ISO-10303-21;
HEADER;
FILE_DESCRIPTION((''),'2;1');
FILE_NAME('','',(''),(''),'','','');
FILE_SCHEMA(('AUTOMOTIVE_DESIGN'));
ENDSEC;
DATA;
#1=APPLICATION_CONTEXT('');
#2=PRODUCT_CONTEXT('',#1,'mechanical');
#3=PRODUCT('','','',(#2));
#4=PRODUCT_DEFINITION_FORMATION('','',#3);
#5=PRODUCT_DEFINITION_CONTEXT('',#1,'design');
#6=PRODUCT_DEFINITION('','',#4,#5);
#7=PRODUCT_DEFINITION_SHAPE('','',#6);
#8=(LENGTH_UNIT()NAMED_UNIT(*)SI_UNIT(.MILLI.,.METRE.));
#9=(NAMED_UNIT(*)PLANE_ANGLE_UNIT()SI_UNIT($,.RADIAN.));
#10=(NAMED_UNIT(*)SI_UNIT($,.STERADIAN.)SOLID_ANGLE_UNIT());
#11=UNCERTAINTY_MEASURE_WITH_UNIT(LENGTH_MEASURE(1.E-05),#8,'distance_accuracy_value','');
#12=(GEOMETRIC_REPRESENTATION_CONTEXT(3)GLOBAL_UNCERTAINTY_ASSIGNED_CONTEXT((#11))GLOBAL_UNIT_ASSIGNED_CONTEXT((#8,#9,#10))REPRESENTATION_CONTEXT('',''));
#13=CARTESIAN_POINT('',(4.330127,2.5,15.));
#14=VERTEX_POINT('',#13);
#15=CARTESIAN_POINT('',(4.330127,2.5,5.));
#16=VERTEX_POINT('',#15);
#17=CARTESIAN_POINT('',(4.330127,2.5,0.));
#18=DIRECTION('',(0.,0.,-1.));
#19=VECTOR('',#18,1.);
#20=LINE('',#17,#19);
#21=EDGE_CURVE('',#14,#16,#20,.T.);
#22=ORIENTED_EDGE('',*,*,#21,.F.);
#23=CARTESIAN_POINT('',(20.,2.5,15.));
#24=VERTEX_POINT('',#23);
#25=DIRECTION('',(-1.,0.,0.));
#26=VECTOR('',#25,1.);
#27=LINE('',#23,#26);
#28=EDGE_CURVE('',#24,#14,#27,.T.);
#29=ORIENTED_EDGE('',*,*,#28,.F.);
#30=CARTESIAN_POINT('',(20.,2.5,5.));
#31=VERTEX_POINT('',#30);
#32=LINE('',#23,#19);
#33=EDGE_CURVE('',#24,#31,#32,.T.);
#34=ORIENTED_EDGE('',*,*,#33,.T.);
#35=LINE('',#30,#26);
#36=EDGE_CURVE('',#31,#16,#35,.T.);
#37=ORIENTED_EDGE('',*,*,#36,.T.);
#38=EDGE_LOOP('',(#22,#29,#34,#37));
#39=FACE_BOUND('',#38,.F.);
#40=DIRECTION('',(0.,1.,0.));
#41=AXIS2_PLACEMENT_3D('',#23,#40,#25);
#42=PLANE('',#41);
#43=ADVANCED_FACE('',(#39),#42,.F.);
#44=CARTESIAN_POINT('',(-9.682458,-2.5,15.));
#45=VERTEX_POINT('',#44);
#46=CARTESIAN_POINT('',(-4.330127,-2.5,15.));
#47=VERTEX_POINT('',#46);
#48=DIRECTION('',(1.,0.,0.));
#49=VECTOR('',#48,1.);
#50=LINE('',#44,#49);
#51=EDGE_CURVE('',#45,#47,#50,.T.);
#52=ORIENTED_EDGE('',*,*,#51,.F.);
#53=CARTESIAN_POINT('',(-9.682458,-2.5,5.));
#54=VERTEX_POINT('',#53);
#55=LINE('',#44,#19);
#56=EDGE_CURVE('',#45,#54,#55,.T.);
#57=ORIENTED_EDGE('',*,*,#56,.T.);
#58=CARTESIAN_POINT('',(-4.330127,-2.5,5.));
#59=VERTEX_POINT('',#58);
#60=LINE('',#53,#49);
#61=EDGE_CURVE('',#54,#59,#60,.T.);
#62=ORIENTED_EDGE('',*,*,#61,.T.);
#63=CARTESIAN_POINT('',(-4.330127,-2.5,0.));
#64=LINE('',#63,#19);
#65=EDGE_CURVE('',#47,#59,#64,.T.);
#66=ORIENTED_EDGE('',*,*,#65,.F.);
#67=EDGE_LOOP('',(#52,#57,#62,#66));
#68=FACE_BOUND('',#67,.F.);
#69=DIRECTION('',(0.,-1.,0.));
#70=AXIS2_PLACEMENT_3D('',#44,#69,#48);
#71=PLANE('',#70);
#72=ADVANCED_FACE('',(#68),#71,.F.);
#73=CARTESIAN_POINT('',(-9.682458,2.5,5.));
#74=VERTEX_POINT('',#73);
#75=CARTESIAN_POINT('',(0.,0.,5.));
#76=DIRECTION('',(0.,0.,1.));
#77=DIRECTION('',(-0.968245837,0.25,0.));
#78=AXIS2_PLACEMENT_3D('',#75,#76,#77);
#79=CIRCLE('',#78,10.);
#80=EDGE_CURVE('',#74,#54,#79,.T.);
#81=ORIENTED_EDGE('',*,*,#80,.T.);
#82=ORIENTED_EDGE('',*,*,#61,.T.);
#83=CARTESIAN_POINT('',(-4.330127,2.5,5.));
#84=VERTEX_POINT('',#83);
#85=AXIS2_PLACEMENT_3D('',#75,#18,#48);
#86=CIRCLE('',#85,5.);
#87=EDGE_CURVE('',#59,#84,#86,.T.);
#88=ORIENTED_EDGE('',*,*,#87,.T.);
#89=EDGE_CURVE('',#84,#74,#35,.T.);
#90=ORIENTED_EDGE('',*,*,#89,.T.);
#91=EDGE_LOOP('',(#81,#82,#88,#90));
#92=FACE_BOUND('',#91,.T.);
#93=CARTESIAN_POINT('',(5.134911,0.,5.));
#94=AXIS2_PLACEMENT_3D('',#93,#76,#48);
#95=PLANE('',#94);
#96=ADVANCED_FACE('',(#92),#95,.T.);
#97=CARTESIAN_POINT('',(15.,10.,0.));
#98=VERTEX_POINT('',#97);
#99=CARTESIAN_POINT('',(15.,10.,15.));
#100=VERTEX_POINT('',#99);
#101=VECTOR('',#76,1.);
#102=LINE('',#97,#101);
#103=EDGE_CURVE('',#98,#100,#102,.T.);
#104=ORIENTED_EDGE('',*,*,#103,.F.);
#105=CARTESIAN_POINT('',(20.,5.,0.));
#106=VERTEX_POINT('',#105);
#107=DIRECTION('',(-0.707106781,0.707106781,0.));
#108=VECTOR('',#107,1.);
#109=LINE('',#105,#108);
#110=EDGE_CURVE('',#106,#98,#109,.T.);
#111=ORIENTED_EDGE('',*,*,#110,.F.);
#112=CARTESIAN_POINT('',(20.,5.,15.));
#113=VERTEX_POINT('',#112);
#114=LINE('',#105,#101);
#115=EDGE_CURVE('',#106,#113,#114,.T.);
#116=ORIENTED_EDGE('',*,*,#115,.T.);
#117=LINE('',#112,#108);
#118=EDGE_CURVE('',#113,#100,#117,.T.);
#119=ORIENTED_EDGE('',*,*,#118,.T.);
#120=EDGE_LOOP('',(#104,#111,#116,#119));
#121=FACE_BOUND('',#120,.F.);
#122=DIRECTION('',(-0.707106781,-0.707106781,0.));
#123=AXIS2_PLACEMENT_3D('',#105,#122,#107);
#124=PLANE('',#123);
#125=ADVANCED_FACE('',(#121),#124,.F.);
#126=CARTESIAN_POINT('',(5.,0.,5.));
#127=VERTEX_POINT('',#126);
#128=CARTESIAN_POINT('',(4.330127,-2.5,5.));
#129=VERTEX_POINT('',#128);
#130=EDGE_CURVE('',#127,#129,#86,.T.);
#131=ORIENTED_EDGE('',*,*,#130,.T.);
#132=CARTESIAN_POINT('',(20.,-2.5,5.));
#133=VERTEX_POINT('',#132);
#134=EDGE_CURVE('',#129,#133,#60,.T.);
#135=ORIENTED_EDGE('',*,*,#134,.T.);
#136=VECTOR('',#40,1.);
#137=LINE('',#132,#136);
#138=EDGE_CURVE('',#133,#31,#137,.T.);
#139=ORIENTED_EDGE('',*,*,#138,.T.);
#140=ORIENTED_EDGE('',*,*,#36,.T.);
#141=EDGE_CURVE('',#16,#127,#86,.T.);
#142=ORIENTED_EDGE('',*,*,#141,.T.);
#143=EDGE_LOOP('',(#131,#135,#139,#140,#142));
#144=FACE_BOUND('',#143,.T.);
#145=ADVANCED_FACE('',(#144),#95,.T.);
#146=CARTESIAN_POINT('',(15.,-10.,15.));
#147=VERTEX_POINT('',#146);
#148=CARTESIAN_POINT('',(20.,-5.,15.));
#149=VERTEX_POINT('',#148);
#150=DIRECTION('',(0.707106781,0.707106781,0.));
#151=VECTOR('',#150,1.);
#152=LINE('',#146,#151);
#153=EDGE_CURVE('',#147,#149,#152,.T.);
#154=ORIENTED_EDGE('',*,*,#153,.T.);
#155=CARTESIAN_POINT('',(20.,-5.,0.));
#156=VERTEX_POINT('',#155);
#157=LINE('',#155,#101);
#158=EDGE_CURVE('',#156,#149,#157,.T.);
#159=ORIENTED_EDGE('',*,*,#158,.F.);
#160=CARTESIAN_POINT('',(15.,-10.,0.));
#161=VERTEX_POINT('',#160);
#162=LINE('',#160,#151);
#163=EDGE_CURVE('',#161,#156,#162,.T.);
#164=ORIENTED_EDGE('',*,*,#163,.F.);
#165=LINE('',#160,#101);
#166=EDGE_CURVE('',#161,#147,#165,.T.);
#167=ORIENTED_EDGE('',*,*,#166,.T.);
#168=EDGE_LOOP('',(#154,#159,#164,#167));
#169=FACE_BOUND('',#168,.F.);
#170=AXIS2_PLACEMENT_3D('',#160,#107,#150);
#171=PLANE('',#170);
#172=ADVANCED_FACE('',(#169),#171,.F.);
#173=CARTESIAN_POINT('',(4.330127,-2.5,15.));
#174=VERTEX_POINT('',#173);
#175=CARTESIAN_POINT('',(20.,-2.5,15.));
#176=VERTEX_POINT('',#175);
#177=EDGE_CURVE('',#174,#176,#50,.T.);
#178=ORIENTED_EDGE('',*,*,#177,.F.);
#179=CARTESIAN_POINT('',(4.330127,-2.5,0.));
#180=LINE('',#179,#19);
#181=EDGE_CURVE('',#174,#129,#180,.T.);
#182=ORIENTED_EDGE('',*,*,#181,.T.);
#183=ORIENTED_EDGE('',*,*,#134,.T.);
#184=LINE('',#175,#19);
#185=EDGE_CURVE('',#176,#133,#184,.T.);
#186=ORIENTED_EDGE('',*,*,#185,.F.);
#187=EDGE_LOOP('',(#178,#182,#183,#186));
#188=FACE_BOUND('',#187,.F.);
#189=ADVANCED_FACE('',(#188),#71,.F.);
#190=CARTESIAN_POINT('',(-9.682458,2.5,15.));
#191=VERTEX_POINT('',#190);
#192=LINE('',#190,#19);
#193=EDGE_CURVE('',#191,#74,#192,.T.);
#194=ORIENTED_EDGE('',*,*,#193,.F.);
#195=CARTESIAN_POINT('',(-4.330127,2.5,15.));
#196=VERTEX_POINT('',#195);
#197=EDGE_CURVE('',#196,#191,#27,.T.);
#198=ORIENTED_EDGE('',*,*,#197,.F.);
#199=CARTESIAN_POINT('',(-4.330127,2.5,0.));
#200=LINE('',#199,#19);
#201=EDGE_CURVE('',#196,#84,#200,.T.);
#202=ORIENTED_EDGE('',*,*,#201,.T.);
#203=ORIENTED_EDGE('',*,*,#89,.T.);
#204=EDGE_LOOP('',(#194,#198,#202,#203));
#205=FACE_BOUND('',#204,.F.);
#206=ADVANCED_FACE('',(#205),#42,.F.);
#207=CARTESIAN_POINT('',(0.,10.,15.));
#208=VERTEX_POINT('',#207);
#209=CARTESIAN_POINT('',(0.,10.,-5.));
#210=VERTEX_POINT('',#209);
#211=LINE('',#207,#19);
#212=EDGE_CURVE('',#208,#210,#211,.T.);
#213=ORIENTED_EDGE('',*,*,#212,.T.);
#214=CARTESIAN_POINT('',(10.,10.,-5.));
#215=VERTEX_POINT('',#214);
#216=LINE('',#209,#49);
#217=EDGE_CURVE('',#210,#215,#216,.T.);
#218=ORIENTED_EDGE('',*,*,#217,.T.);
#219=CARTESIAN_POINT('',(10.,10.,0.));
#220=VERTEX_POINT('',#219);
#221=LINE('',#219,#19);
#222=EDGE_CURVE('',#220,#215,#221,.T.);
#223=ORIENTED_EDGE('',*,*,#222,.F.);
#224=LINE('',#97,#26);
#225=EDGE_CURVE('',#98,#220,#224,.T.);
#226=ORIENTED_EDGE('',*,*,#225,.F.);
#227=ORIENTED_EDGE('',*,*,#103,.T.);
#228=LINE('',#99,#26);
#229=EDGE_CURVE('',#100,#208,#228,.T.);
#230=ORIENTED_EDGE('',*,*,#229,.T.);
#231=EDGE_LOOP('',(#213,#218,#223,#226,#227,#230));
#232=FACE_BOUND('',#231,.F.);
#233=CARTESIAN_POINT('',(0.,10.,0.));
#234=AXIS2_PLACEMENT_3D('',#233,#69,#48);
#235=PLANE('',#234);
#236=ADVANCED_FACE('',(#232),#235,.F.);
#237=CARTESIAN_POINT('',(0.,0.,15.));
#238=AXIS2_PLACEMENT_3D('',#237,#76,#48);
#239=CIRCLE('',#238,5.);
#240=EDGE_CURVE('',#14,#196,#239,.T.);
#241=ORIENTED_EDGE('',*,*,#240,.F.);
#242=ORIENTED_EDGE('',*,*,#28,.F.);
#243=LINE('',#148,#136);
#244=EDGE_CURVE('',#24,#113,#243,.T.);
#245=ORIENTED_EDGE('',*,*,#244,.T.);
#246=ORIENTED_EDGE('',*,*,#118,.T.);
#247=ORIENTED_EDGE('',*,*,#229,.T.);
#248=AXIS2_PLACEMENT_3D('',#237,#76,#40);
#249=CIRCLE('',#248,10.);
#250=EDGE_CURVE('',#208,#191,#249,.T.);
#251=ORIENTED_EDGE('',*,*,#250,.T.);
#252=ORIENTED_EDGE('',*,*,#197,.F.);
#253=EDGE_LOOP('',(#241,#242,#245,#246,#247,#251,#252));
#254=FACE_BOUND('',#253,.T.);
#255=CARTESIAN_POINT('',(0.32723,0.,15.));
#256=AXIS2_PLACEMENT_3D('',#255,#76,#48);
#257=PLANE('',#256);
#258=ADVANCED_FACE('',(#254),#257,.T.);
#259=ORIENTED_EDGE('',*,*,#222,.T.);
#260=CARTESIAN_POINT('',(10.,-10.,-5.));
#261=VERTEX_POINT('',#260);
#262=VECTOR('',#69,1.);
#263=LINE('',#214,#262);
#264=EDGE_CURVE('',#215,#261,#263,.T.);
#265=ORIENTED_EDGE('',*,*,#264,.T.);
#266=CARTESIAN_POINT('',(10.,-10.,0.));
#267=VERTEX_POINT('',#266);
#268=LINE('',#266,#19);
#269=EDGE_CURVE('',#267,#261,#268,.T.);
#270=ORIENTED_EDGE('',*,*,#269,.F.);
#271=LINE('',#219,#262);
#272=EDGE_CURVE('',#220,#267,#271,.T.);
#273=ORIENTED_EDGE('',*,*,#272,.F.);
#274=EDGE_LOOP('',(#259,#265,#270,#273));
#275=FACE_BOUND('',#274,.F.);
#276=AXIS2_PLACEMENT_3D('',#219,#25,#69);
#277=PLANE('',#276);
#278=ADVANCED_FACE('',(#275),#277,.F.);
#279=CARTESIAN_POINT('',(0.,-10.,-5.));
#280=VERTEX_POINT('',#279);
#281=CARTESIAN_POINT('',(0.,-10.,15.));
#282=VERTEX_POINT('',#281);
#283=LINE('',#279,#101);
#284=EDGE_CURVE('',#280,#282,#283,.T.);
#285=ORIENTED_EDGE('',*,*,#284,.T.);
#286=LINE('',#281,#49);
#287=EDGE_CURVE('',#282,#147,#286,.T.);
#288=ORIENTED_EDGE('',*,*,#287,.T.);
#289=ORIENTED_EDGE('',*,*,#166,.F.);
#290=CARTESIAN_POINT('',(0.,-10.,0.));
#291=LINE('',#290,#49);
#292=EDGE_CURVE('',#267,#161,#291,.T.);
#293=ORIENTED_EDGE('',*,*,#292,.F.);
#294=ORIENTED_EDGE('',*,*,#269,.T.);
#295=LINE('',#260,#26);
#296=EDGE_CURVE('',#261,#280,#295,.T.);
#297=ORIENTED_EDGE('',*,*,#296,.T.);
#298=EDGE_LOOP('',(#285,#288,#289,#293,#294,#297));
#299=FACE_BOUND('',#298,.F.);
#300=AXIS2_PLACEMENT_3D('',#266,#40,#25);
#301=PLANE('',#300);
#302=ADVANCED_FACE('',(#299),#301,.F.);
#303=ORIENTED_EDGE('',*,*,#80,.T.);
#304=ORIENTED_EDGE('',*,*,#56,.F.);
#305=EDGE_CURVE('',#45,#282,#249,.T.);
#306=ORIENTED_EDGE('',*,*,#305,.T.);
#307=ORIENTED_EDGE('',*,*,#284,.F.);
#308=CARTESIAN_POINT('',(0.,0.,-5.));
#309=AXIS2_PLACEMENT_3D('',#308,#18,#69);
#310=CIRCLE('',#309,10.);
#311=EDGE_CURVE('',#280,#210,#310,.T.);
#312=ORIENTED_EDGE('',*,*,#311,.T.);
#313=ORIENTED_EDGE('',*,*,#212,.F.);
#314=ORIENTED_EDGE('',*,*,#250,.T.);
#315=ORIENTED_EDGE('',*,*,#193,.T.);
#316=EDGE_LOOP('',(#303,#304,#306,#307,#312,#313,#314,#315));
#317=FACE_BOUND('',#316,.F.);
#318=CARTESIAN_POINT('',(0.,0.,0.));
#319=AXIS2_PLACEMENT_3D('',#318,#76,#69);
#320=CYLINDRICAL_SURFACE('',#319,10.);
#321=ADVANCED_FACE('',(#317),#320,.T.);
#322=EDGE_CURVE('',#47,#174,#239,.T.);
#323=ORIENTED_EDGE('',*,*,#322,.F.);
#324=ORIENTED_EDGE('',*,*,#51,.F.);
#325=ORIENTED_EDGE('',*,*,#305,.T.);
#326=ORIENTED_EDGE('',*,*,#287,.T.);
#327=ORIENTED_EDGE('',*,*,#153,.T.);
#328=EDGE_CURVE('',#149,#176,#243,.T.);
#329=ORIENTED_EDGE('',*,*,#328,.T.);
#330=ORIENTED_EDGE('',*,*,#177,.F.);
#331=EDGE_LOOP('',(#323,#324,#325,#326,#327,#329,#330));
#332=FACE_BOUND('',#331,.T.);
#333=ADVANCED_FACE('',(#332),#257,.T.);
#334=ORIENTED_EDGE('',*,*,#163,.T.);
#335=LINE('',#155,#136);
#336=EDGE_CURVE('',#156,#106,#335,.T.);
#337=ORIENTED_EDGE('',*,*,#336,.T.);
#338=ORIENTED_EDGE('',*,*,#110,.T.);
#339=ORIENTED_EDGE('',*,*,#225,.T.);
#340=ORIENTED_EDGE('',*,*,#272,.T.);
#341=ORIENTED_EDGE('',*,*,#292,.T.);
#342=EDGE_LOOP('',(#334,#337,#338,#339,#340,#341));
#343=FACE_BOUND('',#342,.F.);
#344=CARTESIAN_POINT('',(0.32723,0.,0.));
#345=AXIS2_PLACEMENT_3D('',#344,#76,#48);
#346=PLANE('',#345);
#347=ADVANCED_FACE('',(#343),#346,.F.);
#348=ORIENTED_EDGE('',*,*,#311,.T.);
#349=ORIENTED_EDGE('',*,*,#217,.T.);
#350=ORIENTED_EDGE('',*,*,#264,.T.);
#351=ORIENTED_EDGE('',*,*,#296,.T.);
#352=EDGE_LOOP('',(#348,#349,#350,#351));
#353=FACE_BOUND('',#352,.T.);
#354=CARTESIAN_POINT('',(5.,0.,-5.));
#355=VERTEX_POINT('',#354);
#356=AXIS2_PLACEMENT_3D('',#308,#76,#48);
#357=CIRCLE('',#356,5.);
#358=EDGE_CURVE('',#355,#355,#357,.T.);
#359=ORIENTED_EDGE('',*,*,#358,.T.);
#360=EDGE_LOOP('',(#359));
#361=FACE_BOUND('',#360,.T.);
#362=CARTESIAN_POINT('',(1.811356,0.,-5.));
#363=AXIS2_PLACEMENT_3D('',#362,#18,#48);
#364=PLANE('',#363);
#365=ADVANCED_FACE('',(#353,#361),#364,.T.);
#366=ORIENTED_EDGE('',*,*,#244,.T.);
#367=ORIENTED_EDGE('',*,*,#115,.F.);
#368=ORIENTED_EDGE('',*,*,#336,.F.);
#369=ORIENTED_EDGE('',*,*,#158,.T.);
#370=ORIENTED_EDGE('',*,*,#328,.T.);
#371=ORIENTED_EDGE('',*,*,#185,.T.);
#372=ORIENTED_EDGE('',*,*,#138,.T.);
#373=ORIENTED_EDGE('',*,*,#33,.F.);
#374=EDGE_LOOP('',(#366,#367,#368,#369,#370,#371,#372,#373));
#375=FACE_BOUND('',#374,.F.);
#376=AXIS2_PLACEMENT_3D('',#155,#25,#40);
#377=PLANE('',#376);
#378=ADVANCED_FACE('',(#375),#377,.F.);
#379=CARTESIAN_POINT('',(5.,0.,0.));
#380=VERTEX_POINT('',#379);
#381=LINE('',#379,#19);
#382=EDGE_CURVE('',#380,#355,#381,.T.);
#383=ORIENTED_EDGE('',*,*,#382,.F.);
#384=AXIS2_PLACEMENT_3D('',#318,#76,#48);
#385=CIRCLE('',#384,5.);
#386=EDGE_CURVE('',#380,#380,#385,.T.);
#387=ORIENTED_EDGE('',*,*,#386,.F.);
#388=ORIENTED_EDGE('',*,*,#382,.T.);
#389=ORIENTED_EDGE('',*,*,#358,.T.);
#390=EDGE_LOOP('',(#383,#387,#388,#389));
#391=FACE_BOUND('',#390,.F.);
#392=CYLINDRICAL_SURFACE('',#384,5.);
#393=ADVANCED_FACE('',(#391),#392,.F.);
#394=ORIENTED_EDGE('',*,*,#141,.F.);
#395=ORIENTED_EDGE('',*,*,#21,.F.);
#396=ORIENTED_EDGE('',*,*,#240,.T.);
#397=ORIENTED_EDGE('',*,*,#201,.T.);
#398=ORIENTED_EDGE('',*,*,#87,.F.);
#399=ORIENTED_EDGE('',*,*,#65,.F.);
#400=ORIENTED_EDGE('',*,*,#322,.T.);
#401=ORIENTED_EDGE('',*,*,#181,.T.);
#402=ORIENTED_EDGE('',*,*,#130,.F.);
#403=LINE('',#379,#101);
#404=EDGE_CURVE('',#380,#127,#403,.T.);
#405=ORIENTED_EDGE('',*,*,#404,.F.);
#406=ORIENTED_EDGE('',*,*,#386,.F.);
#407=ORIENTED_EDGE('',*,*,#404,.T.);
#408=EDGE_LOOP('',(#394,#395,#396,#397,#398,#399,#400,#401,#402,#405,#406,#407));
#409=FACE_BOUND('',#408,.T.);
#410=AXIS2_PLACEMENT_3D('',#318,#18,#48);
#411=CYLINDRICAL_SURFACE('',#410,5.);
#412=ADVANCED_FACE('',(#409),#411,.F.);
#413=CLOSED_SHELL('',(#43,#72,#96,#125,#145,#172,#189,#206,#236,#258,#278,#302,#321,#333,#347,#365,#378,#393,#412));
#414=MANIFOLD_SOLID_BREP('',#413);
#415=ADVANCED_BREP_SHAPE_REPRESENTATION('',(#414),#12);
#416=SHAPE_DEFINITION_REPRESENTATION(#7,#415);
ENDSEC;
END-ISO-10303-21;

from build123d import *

# Parameters (mm, degrees)
F0_R     = 5
F1_DEPTH = 15
F3_DEPTH = 5
F4_DEPTH = 25
F6_DEPTH = 10


with BuildPart() as f1:
    # F0 (on Top) → F1 (new body)
    with BuildSketch(Plane.XY):
        with BuildLine():
            ThreePointArc((0, -10), (7.0710678119, -7.0710678119), (10, 0))
            ThreePointArc((10, 0), (7.0710678119, 7.0710678119), (0, 10))
            ThreePointArc((0, 10), (-10, 0), (0, -10))
        make_face()
        Circle(F0_R, mode=Mode.SUBTRACT)
        with BuildLine():
            ThreePointArc((0, 10), (7.0710678119, 7.0710678119), (10, 0))
            ThreePointArc((10, 0), (7.0710678119, -7.0710678119), (0, -10))
            Line((0, -10), (15, -10))
            Line((15, -10), (20, -5))
            Line((20, -5), (20, 5))
            Line((20, 5), (15, 10))
            Line((15, 10), (0, 10))
        make_face()
    extrude(amount=F1_DEPTH)

    # F2 (on face) → F3 (join)
    with BuildSketch(Plane(origin=(0, 0, 0), x_dir=(1, 0, 0), z_dir=(0, 0, -1))):
        with BuildLine():
            ThreePointArc((0, 10), (-10, 0), (0, -10))
            Line((0, -10), (10, -10))
            Line((10, -10), (10, 10))
            Line((10, 10), (0, 10))
        make_face()
    extrude(amount=F3_DEPTH)

    # F4 (cut): a face of the model
    f4_faces = [f1.faces().sort_by_distance(p)[0] for p in [
        (0, 0, 0),
    ]]
    extrude(f4_faces, amount=-F4_DEPTH, mode=Mode.SUBTRACT)

    # F5 (on face) → F6 (cut)
    with BuildSketch(Plane.XY.offset(15)):
        with BuildLine():
            ThreePointArc((-9.6824583655, 2.5), (-10, 0), (-9.6824583655, -2.5))
            Line((-9.6824583655, -2.5), (20, -2.5))
            Line((20, -2.5), (20, 2.5))
            Line((20, 2.5), (-9.6824583655, 2.5))
        make_face()
    extrude(amount=-F6_DEPTH, mode=Mode.SUBTRACT)


solid = f1.part
